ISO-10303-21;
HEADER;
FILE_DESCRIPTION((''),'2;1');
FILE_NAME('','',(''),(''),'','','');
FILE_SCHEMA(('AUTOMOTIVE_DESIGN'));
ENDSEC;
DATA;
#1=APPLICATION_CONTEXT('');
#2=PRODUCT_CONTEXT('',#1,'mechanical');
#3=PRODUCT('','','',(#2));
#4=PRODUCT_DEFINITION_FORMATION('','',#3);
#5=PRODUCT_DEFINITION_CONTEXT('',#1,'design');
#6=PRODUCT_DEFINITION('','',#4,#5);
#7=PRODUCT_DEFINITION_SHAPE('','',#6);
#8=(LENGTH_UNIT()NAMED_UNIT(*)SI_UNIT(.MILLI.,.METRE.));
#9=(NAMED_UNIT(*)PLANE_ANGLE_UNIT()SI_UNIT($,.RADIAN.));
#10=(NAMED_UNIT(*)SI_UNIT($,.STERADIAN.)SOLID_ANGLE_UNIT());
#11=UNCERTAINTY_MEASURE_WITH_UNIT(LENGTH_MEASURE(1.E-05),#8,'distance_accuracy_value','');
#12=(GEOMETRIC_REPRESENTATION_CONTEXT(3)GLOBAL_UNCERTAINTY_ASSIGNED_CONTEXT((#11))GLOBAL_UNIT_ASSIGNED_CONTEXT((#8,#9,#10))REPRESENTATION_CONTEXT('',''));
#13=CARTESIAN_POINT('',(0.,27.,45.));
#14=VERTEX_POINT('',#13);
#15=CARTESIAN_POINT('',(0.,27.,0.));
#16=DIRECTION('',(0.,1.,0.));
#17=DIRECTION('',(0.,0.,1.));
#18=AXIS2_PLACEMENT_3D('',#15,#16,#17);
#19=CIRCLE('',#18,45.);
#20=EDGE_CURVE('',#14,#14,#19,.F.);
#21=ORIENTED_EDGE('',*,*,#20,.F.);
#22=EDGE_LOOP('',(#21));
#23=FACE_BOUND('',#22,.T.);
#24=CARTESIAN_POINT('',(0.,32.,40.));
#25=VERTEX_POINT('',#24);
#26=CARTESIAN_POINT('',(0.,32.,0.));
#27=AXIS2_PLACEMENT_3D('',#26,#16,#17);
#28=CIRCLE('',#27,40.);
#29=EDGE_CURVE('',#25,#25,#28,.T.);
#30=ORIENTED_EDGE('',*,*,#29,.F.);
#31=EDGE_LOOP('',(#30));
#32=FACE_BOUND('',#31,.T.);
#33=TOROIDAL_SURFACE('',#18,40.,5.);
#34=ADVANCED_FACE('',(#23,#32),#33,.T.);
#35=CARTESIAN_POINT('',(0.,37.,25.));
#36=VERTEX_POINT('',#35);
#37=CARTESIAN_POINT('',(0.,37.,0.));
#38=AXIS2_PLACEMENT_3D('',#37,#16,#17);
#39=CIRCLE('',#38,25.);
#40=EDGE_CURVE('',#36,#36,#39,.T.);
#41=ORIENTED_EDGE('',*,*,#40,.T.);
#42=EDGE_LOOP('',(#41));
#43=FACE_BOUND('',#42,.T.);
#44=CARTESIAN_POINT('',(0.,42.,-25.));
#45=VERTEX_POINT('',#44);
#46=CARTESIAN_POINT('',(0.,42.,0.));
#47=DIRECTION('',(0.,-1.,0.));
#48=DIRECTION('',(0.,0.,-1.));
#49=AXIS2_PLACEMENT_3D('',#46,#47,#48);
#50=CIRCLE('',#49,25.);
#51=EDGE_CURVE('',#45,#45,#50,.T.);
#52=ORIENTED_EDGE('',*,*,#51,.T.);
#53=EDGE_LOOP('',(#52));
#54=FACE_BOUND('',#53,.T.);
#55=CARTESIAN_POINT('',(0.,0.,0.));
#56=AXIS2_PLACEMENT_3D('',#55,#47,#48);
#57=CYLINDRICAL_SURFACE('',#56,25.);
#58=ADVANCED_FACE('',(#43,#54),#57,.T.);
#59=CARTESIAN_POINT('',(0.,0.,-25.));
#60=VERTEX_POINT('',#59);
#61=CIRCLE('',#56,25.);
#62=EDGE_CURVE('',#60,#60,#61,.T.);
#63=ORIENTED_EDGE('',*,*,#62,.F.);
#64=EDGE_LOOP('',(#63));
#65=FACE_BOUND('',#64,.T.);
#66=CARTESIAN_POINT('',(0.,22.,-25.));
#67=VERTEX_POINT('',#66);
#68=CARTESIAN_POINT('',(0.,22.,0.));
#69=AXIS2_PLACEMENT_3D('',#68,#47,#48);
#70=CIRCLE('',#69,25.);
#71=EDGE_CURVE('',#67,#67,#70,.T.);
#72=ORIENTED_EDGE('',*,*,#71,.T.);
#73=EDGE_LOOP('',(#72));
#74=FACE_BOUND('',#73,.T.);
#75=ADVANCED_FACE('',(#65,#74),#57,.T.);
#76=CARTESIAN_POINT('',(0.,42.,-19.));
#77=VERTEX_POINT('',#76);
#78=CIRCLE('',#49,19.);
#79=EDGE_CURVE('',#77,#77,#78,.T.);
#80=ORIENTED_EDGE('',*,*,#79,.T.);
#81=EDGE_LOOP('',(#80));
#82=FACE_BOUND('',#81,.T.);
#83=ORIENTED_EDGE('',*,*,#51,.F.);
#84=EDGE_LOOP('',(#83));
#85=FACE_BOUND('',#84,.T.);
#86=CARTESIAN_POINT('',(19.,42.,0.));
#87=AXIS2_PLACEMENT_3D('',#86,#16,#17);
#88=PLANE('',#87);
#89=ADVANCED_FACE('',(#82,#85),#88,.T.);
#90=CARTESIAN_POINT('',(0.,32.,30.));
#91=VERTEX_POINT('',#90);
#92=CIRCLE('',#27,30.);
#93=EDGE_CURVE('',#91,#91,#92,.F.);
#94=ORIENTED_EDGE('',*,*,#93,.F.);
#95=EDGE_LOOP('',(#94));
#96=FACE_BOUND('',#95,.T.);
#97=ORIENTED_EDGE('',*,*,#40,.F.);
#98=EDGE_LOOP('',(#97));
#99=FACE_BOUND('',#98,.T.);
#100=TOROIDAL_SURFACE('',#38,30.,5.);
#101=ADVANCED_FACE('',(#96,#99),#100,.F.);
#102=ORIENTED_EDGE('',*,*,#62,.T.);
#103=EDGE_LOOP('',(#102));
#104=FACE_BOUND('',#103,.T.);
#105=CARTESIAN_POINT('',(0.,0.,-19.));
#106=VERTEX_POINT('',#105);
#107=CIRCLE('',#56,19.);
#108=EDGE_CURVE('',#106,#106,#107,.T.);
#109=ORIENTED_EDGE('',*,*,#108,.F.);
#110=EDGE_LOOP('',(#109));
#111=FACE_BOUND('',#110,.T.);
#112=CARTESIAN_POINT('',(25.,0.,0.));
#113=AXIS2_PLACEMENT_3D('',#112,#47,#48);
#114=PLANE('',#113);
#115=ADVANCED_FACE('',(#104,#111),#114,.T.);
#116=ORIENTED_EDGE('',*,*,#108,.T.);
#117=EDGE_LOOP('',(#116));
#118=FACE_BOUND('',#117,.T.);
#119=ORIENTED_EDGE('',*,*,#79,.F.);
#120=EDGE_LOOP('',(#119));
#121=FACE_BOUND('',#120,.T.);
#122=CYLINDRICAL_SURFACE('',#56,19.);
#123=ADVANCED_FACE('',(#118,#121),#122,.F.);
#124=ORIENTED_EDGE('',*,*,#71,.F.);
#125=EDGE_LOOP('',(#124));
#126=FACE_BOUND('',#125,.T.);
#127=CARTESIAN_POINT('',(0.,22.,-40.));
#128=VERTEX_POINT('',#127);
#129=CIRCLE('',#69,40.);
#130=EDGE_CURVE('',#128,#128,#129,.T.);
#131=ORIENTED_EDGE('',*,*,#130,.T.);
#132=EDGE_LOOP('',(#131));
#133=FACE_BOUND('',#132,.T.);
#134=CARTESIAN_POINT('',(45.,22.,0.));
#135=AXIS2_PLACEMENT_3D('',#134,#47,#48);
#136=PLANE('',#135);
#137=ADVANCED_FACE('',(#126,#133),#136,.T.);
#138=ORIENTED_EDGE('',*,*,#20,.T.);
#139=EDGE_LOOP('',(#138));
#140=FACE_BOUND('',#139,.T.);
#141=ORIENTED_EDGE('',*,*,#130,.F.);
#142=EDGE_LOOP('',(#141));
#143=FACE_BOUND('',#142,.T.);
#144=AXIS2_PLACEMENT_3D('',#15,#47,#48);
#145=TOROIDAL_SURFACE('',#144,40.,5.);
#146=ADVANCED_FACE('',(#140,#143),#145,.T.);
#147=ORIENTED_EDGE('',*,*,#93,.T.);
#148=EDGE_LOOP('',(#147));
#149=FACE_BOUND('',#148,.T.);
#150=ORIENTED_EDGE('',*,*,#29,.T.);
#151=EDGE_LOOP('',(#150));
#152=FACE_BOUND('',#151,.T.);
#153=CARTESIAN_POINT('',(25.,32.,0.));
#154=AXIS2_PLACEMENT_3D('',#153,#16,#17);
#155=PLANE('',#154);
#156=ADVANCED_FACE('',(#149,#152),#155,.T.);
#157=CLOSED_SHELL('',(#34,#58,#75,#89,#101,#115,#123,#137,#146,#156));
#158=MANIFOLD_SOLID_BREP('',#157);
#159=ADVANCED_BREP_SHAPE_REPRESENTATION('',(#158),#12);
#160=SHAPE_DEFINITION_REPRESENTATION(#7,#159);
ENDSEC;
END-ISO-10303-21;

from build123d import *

# Parameters (mm, degrees)
FILLET1_R = 5


with BuildPart() as part:
    # Sketch1 → Revolve1 (revolve)
    with BuildSketch(Plane.XY, mode=Mode.PRIVATE) as revolve1_sk:
        Polygon((19, 0), (19, 42), (25, 42), (25, 32), (45, 32), (45, 22), (25, 22), (25, 0), align=None)
    revolve(revolve1_sk.sketch.rotate(Axis((0, 0, 0), (0, 1, 0)), 90), axis=Axis((0, 0, 0), (0, 1, 0)))

    # Fillet1
    fillet1_edges = [part.edges().sort_by_distance(p)[0] for p in [
        (0, 22, 45),
        (0, 32, 45),
        (0, 32, 25),
    ]]
    fillet(fillet1_edges, radius=FILLET1_R - 0.0001)  # a hair under: the kernel refuses the full size


solid = part.part
